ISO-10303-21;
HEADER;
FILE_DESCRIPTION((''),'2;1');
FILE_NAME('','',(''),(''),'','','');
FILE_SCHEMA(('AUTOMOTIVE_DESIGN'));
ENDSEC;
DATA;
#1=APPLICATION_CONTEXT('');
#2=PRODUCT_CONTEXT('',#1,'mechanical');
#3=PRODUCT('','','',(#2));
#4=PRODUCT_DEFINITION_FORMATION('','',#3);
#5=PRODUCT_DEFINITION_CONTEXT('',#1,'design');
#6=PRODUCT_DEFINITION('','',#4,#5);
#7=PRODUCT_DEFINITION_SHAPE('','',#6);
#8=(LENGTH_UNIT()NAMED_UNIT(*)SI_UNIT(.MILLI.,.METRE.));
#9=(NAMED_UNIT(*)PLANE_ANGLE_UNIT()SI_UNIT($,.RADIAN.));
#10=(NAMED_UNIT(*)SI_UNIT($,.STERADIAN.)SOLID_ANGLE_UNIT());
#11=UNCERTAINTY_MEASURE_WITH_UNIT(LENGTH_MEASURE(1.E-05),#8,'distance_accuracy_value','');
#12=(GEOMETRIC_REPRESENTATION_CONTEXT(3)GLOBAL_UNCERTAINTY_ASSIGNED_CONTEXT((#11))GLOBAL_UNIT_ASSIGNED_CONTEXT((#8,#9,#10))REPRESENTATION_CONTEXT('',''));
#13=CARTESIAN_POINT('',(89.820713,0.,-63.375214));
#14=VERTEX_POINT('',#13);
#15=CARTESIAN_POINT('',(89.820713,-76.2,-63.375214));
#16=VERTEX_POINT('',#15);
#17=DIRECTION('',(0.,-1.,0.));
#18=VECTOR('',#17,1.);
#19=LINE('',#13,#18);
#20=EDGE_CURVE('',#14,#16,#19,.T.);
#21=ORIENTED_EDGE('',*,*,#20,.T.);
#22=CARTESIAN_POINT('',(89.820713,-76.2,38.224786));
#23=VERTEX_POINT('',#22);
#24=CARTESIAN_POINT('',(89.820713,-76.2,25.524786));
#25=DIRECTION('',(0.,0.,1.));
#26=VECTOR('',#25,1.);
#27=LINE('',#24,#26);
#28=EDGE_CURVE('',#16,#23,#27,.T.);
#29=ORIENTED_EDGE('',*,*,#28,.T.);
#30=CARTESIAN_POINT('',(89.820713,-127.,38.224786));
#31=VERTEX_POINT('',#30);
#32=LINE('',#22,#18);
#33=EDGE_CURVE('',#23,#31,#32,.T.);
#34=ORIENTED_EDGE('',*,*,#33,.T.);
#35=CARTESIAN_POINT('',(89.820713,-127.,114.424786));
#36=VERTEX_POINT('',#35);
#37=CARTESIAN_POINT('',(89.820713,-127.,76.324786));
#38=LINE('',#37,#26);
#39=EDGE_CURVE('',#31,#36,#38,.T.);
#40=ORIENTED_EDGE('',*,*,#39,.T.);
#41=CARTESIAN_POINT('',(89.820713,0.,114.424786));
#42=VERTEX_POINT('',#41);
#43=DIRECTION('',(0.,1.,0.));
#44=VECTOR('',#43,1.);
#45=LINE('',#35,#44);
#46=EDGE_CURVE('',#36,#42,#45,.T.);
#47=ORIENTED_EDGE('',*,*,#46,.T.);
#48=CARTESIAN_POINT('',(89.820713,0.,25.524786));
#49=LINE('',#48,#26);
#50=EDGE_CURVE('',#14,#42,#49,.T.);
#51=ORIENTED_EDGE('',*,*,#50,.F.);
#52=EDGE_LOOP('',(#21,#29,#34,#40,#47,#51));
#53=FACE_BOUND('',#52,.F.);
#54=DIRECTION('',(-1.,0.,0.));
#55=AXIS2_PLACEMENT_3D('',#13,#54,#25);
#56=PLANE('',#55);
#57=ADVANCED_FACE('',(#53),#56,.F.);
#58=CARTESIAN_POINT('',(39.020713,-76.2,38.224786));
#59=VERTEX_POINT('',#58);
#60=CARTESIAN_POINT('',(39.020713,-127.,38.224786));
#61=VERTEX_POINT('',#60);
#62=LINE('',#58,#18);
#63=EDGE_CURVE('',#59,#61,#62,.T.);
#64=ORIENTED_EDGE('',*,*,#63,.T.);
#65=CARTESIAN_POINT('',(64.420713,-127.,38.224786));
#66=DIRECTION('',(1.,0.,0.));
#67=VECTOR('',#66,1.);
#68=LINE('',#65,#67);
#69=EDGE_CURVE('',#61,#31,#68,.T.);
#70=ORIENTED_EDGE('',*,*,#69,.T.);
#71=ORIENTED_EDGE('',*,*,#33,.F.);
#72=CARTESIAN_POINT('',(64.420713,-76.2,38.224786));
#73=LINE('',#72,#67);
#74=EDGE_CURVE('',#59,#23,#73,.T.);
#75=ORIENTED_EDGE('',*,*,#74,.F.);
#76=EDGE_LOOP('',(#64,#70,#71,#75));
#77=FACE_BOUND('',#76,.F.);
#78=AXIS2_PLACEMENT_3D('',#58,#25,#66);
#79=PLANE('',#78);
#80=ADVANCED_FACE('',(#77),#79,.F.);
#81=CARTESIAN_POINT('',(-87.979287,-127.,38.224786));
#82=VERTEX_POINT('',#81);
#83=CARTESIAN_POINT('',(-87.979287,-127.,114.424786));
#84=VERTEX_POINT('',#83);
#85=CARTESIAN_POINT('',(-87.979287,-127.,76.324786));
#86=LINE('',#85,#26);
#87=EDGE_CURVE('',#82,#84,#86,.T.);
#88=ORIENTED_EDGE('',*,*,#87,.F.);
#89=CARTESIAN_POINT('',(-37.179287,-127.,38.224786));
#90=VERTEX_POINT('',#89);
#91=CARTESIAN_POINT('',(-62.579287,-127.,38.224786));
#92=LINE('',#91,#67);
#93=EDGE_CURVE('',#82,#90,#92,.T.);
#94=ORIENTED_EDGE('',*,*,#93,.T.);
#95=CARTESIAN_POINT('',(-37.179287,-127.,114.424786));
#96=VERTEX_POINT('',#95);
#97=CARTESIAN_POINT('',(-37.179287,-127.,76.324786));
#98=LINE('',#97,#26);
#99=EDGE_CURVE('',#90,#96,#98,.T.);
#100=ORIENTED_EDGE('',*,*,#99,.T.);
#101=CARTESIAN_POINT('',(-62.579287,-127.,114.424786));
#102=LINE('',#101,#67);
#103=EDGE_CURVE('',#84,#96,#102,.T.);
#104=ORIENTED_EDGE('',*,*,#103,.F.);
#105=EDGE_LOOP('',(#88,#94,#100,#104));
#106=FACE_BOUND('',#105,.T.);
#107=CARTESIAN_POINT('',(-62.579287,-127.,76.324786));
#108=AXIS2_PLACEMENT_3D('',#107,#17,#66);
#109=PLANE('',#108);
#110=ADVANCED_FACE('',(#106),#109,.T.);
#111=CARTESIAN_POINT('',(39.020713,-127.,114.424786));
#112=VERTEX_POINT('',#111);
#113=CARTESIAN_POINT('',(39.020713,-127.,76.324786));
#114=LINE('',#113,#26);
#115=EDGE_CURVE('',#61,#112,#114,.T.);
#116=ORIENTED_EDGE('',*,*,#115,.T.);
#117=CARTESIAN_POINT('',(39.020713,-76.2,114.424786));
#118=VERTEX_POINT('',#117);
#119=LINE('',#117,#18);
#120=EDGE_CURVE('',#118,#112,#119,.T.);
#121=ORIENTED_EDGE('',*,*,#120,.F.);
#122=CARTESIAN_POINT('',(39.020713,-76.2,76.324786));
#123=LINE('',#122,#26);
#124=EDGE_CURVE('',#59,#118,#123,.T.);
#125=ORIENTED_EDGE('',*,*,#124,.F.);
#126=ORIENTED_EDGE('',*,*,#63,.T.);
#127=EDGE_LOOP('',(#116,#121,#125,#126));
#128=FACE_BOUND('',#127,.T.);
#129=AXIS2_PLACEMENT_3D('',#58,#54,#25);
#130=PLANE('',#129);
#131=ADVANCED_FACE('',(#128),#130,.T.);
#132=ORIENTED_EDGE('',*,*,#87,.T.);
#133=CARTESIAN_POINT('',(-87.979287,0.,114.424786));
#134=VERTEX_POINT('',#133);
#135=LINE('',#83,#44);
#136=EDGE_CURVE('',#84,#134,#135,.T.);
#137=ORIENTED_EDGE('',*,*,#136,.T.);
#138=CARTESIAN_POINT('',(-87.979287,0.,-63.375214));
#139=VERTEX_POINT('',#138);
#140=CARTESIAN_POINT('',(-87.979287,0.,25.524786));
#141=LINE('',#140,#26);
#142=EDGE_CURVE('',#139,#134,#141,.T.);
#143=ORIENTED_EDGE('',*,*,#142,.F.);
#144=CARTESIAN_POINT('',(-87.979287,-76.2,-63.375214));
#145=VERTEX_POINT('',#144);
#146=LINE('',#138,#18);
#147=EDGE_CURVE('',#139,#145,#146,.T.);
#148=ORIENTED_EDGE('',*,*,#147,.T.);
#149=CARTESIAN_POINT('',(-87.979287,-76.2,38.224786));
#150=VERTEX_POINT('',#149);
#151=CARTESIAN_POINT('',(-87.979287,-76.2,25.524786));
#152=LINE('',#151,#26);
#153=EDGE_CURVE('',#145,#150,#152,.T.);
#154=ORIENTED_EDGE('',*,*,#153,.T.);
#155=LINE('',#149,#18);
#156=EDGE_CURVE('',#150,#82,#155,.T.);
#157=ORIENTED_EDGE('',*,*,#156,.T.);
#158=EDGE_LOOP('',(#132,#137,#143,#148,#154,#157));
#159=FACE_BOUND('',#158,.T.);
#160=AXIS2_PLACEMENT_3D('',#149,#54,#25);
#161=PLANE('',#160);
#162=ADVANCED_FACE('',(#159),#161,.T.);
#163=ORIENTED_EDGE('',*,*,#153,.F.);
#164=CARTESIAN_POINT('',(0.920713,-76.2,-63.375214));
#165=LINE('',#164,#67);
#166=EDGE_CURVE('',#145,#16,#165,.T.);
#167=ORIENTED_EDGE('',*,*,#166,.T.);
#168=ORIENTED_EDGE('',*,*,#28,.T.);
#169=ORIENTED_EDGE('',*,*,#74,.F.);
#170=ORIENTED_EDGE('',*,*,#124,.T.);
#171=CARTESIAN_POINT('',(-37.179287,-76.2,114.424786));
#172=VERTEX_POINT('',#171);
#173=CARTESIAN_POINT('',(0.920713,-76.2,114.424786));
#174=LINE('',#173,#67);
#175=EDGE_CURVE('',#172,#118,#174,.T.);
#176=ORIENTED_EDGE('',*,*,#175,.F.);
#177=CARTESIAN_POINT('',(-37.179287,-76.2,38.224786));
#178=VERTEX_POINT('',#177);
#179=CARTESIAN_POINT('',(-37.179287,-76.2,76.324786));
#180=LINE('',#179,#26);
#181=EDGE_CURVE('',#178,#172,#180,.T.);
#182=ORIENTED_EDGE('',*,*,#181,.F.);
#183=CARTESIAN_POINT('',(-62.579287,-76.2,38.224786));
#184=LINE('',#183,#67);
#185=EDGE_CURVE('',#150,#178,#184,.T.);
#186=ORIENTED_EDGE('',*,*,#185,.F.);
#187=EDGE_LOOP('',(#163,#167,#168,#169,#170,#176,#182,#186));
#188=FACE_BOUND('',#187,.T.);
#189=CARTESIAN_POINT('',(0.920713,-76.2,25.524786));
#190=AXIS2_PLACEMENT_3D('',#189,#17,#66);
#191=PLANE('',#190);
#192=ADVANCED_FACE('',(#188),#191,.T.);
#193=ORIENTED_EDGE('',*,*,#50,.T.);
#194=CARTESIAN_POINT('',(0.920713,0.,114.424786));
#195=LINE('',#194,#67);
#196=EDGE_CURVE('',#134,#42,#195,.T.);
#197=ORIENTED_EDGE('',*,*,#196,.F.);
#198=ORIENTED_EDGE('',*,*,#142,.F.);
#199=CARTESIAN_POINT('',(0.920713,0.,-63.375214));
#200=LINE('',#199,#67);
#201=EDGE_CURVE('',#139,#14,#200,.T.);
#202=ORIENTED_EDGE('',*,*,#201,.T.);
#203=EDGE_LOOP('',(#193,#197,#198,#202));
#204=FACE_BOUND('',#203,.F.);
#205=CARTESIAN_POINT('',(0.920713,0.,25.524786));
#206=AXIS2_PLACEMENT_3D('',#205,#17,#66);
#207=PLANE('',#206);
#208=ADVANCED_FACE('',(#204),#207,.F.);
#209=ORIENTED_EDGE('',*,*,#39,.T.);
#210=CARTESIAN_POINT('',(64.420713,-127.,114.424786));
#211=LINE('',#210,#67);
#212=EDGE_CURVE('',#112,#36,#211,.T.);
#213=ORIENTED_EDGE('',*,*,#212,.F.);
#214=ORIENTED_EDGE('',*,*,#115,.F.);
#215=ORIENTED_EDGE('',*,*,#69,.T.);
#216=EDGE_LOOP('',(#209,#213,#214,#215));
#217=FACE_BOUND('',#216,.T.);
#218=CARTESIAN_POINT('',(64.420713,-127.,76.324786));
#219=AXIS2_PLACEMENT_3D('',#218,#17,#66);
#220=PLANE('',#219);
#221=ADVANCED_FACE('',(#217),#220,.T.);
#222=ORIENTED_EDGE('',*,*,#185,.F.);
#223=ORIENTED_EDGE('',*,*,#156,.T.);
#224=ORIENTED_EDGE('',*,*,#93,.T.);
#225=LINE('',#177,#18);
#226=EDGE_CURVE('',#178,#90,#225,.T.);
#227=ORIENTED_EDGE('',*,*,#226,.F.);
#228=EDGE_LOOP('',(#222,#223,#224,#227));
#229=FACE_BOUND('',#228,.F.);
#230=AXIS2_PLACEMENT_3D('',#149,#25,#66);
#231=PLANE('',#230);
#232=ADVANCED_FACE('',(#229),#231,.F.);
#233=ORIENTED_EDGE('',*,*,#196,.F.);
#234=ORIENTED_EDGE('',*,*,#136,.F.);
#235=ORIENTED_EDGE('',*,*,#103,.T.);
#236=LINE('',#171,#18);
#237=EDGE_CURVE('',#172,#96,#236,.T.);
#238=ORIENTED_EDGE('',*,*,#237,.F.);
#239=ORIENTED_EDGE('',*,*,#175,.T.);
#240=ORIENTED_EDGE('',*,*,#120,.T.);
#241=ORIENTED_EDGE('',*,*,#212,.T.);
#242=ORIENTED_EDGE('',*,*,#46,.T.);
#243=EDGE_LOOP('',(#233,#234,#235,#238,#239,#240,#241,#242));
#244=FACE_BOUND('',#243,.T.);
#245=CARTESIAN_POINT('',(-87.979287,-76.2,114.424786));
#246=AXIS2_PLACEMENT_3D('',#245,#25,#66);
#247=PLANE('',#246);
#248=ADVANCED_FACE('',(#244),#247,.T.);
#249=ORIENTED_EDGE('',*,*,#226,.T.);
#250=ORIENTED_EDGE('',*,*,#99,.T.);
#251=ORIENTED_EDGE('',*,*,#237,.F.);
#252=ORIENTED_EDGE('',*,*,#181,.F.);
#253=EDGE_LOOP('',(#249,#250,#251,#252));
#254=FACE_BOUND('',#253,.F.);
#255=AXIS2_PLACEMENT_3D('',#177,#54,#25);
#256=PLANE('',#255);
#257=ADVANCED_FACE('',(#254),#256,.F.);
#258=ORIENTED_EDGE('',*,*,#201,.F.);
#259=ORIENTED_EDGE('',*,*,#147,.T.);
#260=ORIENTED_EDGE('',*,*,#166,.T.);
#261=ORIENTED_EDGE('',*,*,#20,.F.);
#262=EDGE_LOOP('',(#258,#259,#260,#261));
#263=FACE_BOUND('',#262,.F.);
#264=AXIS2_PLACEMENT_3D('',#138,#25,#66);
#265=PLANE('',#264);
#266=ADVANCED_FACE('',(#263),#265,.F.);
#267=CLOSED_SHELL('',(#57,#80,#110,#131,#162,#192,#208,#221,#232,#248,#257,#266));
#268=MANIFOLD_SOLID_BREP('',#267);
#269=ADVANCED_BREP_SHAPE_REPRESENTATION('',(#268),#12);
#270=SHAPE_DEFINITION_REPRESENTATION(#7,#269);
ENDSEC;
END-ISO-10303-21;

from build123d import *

# Parameters (mm, degrees)
F0_W     = 177.8
F0_H     = 177.8
F1_DEPTH = 50.8
F2_DEPTH = 25.4
F3_W     = 50.8
F3_H     = 76.2
F4_DEPTH = 50.8


# Not quite as in the source:
# - a feature names something its author has since deleted; it is built from what else it names


with BuildPart() as f1:
    # F0 (on Front) → F1 (new body)
    with BuildSketch(Plane.XZ):
        with Locations((0.9207129478, 25.5247855931)):
            Rectangle(F0_W, F0_H)
    extrude(amount=F1_DEPTH)

    # F2 (add, symmetric): a face of the model
    f2_faces = [f1.faces().sort_by_distance(p)[0] for p in [
        (0.9207129478, -50.8, 25.5247855931),
    ]]
    extrude(f2_faces, amount=F2_DEPTH, both=True)

    # F3 (on face) → F4 (join)
    with BuildSketch(Plane.XZ.offset(76.2)):
        with Locations((-62.5792870522, 76.3247855931)):
            Rectangle(F3_W, F3_H)
        with Locations((64.4207129478, 76.3247855931)):
            Rectangle(F3_W, F3_H)
    extrude(amount=F4_DEPTH)


solid = f1.part
